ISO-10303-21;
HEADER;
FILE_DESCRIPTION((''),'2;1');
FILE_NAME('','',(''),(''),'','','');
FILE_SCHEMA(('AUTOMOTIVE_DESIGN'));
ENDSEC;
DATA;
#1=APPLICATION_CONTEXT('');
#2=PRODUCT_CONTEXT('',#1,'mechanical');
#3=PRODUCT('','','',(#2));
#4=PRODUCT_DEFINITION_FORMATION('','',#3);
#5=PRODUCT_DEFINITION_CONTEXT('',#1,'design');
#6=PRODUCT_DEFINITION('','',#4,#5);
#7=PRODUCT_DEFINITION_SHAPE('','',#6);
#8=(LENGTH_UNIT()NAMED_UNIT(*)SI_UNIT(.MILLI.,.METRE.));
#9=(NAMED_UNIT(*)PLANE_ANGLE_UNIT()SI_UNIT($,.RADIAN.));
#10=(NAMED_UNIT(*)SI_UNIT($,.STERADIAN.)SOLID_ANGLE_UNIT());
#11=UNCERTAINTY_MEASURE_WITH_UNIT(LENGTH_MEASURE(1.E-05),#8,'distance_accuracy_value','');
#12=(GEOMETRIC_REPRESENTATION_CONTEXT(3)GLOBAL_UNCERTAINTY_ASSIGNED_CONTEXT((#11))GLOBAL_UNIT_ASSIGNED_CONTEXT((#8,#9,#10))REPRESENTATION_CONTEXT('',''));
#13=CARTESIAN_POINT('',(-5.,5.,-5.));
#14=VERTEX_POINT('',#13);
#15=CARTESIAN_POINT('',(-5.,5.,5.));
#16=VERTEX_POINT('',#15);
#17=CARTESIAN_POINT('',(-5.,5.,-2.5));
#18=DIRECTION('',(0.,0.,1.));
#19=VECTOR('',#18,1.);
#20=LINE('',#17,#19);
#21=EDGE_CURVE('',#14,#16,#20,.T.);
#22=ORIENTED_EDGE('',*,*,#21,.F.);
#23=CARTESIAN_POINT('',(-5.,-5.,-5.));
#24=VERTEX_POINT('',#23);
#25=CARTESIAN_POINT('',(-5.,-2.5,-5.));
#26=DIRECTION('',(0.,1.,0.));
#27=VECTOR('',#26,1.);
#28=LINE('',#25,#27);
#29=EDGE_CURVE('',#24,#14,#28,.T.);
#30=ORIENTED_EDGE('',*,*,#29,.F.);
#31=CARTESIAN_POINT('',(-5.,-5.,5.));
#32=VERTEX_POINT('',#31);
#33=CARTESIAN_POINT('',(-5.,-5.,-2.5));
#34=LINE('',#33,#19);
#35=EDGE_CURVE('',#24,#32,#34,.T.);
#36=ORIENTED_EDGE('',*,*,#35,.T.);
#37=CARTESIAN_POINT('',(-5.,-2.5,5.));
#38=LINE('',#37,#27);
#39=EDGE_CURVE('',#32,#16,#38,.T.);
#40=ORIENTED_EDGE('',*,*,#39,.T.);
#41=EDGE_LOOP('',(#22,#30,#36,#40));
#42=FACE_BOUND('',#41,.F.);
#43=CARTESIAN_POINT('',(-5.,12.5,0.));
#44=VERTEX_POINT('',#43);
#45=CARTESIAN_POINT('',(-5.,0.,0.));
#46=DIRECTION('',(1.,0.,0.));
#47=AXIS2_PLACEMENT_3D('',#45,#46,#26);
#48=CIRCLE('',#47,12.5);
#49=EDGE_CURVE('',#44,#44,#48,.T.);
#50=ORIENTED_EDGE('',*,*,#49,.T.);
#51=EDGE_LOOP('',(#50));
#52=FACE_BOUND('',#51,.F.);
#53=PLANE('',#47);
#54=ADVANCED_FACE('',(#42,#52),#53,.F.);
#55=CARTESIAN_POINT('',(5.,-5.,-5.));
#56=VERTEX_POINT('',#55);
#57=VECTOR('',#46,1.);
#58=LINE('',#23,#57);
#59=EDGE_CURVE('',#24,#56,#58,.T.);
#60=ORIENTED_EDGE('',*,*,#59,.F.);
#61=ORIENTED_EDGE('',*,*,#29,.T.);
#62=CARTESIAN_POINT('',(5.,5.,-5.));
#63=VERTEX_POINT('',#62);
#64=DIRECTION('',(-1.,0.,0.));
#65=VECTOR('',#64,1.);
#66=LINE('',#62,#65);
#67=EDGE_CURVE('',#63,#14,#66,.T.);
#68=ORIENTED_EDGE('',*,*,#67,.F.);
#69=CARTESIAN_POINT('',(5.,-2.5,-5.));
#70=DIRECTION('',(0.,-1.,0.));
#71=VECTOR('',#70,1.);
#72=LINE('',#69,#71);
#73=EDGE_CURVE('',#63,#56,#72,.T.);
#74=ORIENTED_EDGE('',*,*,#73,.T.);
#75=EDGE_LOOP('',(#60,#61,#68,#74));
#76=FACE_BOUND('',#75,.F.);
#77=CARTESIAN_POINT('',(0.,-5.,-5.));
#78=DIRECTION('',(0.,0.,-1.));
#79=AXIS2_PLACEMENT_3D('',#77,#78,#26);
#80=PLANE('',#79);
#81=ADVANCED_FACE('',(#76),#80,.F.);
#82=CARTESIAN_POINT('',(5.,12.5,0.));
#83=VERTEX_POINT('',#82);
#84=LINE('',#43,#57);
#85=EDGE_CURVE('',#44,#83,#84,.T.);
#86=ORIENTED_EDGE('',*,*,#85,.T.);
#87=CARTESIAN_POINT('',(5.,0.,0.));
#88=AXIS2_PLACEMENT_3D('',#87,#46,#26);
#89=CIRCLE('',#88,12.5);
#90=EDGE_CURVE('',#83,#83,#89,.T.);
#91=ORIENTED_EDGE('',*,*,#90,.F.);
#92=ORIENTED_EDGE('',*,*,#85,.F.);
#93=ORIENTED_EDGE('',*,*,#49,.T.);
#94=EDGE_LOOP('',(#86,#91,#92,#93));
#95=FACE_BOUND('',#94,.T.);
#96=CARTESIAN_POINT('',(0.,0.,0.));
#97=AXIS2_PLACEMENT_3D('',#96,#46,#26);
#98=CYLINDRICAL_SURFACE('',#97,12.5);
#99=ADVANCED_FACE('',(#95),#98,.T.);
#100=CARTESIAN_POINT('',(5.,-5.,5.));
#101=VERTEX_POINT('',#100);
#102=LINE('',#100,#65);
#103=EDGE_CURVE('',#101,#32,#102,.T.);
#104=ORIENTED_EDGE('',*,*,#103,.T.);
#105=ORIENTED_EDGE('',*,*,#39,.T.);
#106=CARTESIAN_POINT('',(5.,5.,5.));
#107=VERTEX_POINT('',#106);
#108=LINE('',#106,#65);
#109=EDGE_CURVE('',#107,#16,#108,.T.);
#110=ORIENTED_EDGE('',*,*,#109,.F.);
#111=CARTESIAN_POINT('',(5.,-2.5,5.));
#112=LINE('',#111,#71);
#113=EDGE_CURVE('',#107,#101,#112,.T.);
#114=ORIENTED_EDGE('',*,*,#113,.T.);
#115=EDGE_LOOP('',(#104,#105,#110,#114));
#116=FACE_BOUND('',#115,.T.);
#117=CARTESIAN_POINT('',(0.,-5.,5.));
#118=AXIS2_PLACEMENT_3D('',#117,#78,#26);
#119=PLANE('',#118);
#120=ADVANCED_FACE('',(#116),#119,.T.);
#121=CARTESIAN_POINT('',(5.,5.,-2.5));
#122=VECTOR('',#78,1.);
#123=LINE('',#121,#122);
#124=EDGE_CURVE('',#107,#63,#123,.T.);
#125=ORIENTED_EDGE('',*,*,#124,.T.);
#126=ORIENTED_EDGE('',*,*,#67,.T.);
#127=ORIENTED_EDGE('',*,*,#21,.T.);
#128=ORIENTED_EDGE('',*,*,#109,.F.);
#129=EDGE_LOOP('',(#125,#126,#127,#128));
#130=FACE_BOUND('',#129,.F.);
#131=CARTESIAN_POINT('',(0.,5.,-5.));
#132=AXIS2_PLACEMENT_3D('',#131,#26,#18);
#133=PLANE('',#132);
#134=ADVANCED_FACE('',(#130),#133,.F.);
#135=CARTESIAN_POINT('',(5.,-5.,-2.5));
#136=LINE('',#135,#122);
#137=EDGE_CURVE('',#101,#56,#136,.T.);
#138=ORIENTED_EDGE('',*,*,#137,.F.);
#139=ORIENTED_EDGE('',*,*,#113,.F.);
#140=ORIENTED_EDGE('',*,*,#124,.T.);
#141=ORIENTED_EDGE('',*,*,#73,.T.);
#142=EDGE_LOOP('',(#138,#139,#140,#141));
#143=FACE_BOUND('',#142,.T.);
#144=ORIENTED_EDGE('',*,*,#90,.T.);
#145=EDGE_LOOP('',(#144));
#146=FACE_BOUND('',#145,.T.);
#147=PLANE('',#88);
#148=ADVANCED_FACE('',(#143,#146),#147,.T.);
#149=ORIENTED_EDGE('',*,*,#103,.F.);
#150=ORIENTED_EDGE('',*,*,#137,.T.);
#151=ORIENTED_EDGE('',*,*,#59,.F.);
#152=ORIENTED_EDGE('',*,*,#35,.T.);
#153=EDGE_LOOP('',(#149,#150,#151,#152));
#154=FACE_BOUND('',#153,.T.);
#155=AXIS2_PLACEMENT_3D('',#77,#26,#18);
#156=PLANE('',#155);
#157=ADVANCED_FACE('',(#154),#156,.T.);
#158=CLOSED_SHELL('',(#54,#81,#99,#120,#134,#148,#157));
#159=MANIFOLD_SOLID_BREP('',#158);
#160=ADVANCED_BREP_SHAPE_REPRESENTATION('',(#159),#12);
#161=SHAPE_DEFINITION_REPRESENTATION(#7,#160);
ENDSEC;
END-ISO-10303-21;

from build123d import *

# Parameters (mm, degrees)
F0_R          = 12.5
F2_DEPTH      = 5
F1_W          = 10
F1_H          = 10
F3_DEPTH      = 5.001
F3_DEPTH_BACK = 5.001


with BuildPart() as f2:
    # F0 (on Right) → F2 (new body, symmetric)
    with BuildSketch(Plane.YZ):
        Circle(F0_R)
    extrude(amount=F2_DEPTH, both=True)

    # F1 (on Right) → F3 (cut, two sides)
    with BuildSketch(Plane.YZ) as f3_sk:
        Rectangle(F1_W, F1_H)
    extrude(amount=-F3_DEPTH, mode=Mode.SUBTRACT)
    extrude(f3_sk.sketch, amount=F3_DEPTH_BACK, mode=Mode.SUBTRACT)


solid = f2.part
